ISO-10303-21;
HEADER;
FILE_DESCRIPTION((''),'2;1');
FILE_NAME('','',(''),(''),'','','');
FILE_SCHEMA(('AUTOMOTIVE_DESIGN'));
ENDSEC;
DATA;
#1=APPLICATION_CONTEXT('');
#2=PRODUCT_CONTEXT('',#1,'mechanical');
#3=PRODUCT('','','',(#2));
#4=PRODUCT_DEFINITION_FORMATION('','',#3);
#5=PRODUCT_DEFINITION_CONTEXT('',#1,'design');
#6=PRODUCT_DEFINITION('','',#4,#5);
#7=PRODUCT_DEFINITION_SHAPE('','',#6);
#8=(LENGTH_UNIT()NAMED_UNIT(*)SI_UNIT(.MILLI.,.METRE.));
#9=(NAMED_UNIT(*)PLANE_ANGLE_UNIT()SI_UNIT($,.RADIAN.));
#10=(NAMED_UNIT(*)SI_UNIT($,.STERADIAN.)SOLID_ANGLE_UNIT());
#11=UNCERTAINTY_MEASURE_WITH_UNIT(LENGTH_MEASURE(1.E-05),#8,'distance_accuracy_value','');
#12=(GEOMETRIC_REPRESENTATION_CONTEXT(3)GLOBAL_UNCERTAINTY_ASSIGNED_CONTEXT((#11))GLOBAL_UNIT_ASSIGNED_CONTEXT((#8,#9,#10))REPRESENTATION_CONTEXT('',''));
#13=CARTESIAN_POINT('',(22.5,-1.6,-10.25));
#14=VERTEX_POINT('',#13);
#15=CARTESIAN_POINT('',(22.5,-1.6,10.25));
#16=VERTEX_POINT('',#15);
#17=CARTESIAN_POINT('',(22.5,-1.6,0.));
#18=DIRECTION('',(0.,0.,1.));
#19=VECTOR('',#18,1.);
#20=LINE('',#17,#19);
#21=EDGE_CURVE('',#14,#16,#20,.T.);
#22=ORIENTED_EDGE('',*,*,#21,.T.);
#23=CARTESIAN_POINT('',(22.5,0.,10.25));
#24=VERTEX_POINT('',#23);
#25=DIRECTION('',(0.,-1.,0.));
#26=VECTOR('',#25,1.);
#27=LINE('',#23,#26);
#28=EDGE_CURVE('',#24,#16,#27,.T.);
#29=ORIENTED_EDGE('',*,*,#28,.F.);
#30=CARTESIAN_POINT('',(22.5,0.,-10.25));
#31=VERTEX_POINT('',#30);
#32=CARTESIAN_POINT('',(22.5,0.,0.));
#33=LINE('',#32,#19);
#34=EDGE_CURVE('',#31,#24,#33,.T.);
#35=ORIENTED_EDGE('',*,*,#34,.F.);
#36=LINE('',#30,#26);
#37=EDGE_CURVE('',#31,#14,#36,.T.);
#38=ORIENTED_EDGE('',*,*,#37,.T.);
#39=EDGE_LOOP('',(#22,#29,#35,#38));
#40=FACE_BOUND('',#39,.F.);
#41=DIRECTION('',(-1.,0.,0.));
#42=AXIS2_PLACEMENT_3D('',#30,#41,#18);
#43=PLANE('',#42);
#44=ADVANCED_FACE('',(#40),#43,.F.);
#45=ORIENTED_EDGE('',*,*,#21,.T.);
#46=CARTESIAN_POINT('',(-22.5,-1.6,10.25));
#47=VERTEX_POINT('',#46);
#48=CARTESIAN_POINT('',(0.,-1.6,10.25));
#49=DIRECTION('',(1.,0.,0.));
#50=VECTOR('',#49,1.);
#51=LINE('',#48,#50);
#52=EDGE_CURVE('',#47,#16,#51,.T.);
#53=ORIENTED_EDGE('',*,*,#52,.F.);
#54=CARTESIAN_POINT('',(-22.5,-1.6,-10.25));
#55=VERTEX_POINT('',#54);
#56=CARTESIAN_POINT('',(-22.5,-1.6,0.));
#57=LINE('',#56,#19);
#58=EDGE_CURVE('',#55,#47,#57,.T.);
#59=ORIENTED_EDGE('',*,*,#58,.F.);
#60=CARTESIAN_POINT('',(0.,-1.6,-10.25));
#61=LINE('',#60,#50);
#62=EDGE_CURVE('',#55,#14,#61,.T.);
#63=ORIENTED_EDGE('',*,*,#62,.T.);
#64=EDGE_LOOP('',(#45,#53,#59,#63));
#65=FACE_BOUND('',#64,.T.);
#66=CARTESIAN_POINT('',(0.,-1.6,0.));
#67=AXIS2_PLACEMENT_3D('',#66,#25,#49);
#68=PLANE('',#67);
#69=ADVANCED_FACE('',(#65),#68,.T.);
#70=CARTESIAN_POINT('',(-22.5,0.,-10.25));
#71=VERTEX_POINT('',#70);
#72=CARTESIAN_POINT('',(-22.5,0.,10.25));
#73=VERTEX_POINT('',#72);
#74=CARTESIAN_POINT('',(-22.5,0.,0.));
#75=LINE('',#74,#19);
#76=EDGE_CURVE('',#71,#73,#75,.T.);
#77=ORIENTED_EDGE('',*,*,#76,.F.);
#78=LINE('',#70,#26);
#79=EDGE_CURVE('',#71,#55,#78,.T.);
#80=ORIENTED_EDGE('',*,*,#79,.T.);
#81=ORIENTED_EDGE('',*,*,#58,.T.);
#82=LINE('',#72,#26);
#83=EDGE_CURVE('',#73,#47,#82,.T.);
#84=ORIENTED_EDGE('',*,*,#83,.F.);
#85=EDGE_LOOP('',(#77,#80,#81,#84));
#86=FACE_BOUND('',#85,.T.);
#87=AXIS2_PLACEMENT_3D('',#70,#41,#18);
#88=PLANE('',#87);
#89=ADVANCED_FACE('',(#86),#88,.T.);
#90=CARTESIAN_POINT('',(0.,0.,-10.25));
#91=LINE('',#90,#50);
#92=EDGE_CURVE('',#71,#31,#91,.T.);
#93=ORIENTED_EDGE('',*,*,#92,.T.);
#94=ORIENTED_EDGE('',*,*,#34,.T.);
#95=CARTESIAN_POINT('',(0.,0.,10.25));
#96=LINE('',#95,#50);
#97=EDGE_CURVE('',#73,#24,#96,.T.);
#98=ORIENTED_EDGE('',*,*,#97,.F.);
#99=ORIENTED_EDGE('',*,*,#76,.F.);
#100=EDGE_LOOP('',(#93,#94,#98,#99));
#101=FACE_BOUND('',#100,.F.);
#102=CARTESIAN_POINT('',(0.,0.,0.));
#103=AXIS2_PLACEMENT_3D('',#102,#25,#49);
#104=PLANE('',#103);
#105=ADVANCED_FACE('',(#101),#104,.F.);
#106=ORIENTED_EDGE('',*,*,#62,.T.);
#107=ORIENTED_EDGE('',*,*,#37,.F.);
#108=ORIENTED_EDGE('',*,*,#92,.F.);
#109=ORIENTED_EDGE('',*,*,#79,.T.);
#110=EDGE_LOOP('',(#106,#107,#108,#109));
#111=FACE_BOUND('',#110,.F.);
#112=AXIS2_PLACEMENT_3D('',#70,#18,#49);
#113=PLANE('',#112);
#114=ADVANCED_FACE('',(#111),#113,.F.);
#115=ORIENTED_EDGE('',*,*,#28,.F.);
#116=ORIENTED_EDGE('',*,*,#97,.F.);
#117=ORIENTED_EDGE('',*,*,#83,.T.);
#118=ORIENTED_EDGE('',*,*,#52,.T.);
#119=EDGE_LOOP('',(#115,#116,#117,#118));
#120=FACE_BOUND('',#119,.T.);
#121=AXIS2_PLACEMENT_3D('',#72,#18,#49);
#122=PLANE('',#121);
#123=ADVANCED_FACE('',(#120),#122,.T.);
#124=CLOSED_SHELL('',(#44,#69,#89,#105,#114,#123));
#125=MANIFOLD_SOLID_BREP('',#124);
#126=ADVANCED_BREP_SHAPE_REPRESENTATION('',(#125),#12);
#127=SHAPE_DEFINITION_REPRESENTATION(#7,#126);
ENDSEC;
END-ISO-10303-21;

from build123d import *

# Parameters (mm, degrees)
F0_W     = 45
F0_H     = 20.5
F1_DEPTH = 1.6


# Not quite as in the source:
# - the program builds the solid bodies; features that only make, move or delete a surface that nothing else refers to are left out


with BuildPart() as f1:
    # F0 (on Front) → F1 (new body)
    with BuildSketch(Plane.XZ):
        Rectangle(F0_W, F0_H)
    extrude(amount=F1_DEPTH)


solid = f1.part
